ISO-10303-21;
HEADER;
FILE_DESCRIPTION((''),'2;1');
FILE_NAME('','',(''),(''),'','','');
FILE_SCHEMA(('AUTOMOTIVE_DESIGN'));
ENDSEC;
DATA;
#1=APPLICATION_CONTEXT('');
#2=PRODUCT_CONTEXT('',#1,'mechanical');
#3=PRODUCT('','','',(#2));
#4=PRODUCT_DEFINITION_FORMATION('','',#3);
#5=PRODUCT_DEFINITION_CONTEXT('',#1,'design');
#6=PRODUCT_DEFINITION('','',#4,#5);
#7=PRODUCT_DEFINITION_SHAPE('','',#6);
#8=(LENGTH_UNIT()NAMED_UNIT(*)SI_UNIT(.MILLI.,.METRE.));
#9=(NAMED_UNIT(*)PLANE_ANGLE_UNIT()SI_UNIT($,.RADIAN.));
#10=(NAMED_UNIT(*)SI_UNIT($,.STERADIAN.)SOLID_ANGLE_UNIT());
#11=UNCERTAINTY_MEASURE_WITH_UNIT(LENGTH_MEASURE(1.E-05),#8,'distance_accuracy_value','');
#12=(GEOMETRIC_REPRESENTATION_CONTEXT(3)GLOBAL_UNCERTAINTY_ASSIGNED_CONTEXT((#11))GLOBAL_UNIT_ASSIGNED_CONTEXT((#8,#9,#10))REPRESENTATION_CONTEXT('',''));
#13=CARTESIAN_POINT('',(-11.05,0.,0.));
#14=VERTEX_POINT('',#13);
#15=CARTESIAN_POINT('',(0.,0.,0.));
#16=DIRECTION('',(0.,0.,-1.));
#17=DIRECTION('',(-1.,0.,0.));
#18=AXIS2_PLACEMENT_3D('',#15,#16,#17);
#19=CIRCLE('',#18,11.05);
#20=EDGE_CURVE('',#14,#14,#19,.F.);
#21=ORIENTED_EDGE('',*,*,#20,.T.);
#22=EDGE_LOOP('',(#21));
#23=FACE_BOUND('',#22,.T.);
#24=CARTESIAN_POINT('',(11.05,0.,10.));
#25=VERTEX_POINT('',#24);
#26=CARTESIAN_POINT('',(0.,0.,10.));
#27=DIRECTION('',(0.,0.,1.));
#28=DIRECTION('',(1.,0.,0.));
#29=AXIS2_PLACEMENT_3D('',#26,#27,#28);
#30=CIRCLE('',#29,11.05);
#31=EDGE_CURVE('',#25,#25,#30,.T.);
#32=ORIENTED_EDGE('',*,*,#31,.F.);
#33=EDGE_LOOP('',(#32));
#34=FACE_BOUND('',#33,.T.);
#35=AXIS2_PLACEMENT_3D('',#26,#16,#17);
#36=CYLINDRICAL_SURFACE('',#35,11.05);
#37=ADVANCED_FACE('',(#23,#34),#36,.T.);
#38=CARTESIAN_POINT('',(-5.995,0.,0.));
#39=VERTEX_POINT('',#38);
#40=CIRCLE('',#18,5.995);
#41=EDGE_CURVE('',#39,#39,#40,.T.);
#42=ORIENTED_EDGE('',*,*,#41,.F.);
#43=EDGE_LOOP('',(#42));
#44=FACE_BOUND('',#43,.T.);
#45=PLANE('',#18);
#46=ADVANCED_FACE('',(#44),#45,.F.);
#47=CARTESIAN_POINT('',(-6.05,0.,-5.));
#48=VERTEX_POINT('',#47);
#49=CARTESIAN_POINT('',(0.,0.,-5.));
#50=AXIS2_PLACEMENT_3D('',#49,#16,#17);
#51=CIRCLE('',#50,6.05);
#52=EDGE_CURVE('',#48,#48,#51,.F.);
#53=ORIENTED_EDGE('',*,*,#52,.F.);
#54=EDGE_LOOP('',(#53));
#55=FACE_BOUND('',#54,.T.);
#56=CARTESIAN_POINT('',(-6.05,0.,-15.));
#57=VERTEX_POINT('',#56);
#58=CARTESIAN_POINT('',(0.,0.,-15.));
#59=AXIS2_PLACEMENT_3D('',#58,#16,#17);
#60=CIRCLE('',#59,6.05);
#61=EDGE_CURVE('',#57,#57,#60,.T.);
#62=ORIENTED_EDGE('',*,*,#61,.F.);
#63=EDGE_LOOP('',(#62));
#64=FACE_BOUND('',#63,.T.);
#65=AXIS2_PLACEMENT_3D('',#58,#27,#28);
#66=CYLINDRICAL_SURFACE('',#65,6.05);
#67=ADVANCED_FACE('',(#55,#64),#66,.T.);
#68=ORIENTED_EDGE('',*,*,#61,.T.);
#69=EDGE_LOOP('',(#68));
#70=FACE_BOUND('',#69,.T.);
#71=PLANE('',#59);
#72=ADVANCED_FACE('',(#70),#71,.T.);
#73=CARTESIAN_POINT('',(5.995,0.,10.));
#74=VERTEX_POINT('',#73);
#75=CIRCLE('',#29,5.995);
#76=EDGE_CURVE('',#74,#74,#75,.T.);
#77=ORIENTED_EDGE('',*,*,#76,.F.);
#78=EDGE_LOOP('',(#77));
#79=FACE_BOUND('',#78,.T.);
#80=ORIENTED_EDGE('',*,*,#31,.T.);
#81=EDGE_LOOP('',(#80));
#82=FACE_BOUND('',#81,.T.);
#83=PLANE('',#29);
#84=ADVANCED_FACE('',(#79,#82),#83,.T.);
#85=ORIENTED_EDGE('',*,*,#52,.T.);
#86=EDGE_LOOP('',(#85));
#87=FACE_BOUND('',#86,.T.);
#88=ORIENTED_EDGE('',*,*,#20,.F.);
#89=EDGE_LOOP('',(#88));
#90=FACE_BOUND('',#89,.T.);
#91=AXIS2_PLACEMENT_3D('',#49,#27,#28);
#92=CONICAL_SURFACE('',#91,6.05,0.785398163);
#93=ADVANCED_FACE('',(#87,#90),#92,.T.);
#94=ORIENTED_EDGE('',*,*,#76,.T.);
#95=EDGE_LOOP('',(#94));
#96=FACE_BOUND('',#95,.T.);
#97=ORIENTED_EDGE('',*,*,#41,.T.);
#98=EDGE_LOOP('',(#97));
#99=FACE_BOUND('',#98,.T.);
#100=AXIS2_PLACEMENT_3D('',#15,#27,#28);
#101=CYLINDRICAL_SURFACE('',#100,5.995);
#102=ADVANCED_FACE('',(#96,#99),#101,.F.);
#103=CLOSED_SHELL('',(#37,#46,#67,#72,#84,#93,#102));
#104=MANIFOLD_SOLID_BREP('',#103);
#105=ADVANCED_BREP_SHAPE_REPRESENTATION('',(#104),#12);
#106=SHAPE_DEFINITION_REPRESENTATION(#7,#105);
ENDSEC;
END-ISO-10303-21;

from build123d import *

# Parameters (mm, degrees)
SKETCH1_R           = 11.05
SKETCH1_R_2         = 6.05
BOSS_EXTRUDE1_DEPTH = 10
SKETCH2_R           = 6.05
BOSS_EXTRUDE2_DEPTH = 15
BOSS_EXTRUDE3_START = 5
SKETCH3_R           = 11.05
BOSS_EXTRUDE3_DEPTH = 5
CHAMFER1_SIZE       = 5
SKETCH4_R           = 6.05
SKETCH4_R_2         = 5.995
BOSS_EXTRUDE4_DEPTH = 10


with BuildPart() as part:
    # Sketch1 → Boss-Extrude1 (new body)
    with BuildSketch(Plane.XY):
        Circle(SKETCH1_R)
        Circle(SKETCH1_R_2, mode=Mode.SUBTRACT)
    extrude(amount=BOSS_EXTRUDE1_DEPTH)



with BuildPart() as body_2:
    # Sketch2 → Boss-Extrude2 (new body)
    with BuildSketch(Plane(origin=(0, 0, 0), x_dir=(-1, 0, 0), z_dir=(0, 0, -1))):
        with Locations(Location((0, 0, 0), (0, 0, 180))):
            Circle(SKETCH2_R)
    extrude(amount=BOSS_EXTRUDE2_DEPTH)


with BuildPart() as part_1:
    add(part.part)

    add(body_2.part)  # Boss-Extrude3 merges body 2
    # Sketch3 → Boss-Extrude3 (add)
    with BuildSketch(Plane(origin=(0, 0, 0), x_dir=(-1, 0, 0), z_dir=(0, 0, -1)).offset(BOSS_EXTRUDE3_START)):
        Circle(SKETCH3_R)
    extrude(amount=-BOSS_EXTRUDE3_DEPTH)

    # Chamfer1
    chamfer1_edges = [part_1.edges().sort_by_distance(p)[0] for p in [
        (11.05, 0, -5),
    ]]
    chamfer(chamfer1_edges, length=CHAMFER1_SIZE - 0.0001)  # a hair under: the kernel refuses the full size

    # Sketch4 → Boss-Extrude4 (add)
    with BuildSketch(Plane.XY.offset(10)):
        with Locations(Location((0, 0, 0), (0, 0, 180))):
            Circle(SKETCH4_R)
        Circle(SKETCH4_R_2, mode=Mode.SUBTRACT)
    extrude(amount=-BOSS_EXTRUDE4_DEPTH)


solid = part_1.part
